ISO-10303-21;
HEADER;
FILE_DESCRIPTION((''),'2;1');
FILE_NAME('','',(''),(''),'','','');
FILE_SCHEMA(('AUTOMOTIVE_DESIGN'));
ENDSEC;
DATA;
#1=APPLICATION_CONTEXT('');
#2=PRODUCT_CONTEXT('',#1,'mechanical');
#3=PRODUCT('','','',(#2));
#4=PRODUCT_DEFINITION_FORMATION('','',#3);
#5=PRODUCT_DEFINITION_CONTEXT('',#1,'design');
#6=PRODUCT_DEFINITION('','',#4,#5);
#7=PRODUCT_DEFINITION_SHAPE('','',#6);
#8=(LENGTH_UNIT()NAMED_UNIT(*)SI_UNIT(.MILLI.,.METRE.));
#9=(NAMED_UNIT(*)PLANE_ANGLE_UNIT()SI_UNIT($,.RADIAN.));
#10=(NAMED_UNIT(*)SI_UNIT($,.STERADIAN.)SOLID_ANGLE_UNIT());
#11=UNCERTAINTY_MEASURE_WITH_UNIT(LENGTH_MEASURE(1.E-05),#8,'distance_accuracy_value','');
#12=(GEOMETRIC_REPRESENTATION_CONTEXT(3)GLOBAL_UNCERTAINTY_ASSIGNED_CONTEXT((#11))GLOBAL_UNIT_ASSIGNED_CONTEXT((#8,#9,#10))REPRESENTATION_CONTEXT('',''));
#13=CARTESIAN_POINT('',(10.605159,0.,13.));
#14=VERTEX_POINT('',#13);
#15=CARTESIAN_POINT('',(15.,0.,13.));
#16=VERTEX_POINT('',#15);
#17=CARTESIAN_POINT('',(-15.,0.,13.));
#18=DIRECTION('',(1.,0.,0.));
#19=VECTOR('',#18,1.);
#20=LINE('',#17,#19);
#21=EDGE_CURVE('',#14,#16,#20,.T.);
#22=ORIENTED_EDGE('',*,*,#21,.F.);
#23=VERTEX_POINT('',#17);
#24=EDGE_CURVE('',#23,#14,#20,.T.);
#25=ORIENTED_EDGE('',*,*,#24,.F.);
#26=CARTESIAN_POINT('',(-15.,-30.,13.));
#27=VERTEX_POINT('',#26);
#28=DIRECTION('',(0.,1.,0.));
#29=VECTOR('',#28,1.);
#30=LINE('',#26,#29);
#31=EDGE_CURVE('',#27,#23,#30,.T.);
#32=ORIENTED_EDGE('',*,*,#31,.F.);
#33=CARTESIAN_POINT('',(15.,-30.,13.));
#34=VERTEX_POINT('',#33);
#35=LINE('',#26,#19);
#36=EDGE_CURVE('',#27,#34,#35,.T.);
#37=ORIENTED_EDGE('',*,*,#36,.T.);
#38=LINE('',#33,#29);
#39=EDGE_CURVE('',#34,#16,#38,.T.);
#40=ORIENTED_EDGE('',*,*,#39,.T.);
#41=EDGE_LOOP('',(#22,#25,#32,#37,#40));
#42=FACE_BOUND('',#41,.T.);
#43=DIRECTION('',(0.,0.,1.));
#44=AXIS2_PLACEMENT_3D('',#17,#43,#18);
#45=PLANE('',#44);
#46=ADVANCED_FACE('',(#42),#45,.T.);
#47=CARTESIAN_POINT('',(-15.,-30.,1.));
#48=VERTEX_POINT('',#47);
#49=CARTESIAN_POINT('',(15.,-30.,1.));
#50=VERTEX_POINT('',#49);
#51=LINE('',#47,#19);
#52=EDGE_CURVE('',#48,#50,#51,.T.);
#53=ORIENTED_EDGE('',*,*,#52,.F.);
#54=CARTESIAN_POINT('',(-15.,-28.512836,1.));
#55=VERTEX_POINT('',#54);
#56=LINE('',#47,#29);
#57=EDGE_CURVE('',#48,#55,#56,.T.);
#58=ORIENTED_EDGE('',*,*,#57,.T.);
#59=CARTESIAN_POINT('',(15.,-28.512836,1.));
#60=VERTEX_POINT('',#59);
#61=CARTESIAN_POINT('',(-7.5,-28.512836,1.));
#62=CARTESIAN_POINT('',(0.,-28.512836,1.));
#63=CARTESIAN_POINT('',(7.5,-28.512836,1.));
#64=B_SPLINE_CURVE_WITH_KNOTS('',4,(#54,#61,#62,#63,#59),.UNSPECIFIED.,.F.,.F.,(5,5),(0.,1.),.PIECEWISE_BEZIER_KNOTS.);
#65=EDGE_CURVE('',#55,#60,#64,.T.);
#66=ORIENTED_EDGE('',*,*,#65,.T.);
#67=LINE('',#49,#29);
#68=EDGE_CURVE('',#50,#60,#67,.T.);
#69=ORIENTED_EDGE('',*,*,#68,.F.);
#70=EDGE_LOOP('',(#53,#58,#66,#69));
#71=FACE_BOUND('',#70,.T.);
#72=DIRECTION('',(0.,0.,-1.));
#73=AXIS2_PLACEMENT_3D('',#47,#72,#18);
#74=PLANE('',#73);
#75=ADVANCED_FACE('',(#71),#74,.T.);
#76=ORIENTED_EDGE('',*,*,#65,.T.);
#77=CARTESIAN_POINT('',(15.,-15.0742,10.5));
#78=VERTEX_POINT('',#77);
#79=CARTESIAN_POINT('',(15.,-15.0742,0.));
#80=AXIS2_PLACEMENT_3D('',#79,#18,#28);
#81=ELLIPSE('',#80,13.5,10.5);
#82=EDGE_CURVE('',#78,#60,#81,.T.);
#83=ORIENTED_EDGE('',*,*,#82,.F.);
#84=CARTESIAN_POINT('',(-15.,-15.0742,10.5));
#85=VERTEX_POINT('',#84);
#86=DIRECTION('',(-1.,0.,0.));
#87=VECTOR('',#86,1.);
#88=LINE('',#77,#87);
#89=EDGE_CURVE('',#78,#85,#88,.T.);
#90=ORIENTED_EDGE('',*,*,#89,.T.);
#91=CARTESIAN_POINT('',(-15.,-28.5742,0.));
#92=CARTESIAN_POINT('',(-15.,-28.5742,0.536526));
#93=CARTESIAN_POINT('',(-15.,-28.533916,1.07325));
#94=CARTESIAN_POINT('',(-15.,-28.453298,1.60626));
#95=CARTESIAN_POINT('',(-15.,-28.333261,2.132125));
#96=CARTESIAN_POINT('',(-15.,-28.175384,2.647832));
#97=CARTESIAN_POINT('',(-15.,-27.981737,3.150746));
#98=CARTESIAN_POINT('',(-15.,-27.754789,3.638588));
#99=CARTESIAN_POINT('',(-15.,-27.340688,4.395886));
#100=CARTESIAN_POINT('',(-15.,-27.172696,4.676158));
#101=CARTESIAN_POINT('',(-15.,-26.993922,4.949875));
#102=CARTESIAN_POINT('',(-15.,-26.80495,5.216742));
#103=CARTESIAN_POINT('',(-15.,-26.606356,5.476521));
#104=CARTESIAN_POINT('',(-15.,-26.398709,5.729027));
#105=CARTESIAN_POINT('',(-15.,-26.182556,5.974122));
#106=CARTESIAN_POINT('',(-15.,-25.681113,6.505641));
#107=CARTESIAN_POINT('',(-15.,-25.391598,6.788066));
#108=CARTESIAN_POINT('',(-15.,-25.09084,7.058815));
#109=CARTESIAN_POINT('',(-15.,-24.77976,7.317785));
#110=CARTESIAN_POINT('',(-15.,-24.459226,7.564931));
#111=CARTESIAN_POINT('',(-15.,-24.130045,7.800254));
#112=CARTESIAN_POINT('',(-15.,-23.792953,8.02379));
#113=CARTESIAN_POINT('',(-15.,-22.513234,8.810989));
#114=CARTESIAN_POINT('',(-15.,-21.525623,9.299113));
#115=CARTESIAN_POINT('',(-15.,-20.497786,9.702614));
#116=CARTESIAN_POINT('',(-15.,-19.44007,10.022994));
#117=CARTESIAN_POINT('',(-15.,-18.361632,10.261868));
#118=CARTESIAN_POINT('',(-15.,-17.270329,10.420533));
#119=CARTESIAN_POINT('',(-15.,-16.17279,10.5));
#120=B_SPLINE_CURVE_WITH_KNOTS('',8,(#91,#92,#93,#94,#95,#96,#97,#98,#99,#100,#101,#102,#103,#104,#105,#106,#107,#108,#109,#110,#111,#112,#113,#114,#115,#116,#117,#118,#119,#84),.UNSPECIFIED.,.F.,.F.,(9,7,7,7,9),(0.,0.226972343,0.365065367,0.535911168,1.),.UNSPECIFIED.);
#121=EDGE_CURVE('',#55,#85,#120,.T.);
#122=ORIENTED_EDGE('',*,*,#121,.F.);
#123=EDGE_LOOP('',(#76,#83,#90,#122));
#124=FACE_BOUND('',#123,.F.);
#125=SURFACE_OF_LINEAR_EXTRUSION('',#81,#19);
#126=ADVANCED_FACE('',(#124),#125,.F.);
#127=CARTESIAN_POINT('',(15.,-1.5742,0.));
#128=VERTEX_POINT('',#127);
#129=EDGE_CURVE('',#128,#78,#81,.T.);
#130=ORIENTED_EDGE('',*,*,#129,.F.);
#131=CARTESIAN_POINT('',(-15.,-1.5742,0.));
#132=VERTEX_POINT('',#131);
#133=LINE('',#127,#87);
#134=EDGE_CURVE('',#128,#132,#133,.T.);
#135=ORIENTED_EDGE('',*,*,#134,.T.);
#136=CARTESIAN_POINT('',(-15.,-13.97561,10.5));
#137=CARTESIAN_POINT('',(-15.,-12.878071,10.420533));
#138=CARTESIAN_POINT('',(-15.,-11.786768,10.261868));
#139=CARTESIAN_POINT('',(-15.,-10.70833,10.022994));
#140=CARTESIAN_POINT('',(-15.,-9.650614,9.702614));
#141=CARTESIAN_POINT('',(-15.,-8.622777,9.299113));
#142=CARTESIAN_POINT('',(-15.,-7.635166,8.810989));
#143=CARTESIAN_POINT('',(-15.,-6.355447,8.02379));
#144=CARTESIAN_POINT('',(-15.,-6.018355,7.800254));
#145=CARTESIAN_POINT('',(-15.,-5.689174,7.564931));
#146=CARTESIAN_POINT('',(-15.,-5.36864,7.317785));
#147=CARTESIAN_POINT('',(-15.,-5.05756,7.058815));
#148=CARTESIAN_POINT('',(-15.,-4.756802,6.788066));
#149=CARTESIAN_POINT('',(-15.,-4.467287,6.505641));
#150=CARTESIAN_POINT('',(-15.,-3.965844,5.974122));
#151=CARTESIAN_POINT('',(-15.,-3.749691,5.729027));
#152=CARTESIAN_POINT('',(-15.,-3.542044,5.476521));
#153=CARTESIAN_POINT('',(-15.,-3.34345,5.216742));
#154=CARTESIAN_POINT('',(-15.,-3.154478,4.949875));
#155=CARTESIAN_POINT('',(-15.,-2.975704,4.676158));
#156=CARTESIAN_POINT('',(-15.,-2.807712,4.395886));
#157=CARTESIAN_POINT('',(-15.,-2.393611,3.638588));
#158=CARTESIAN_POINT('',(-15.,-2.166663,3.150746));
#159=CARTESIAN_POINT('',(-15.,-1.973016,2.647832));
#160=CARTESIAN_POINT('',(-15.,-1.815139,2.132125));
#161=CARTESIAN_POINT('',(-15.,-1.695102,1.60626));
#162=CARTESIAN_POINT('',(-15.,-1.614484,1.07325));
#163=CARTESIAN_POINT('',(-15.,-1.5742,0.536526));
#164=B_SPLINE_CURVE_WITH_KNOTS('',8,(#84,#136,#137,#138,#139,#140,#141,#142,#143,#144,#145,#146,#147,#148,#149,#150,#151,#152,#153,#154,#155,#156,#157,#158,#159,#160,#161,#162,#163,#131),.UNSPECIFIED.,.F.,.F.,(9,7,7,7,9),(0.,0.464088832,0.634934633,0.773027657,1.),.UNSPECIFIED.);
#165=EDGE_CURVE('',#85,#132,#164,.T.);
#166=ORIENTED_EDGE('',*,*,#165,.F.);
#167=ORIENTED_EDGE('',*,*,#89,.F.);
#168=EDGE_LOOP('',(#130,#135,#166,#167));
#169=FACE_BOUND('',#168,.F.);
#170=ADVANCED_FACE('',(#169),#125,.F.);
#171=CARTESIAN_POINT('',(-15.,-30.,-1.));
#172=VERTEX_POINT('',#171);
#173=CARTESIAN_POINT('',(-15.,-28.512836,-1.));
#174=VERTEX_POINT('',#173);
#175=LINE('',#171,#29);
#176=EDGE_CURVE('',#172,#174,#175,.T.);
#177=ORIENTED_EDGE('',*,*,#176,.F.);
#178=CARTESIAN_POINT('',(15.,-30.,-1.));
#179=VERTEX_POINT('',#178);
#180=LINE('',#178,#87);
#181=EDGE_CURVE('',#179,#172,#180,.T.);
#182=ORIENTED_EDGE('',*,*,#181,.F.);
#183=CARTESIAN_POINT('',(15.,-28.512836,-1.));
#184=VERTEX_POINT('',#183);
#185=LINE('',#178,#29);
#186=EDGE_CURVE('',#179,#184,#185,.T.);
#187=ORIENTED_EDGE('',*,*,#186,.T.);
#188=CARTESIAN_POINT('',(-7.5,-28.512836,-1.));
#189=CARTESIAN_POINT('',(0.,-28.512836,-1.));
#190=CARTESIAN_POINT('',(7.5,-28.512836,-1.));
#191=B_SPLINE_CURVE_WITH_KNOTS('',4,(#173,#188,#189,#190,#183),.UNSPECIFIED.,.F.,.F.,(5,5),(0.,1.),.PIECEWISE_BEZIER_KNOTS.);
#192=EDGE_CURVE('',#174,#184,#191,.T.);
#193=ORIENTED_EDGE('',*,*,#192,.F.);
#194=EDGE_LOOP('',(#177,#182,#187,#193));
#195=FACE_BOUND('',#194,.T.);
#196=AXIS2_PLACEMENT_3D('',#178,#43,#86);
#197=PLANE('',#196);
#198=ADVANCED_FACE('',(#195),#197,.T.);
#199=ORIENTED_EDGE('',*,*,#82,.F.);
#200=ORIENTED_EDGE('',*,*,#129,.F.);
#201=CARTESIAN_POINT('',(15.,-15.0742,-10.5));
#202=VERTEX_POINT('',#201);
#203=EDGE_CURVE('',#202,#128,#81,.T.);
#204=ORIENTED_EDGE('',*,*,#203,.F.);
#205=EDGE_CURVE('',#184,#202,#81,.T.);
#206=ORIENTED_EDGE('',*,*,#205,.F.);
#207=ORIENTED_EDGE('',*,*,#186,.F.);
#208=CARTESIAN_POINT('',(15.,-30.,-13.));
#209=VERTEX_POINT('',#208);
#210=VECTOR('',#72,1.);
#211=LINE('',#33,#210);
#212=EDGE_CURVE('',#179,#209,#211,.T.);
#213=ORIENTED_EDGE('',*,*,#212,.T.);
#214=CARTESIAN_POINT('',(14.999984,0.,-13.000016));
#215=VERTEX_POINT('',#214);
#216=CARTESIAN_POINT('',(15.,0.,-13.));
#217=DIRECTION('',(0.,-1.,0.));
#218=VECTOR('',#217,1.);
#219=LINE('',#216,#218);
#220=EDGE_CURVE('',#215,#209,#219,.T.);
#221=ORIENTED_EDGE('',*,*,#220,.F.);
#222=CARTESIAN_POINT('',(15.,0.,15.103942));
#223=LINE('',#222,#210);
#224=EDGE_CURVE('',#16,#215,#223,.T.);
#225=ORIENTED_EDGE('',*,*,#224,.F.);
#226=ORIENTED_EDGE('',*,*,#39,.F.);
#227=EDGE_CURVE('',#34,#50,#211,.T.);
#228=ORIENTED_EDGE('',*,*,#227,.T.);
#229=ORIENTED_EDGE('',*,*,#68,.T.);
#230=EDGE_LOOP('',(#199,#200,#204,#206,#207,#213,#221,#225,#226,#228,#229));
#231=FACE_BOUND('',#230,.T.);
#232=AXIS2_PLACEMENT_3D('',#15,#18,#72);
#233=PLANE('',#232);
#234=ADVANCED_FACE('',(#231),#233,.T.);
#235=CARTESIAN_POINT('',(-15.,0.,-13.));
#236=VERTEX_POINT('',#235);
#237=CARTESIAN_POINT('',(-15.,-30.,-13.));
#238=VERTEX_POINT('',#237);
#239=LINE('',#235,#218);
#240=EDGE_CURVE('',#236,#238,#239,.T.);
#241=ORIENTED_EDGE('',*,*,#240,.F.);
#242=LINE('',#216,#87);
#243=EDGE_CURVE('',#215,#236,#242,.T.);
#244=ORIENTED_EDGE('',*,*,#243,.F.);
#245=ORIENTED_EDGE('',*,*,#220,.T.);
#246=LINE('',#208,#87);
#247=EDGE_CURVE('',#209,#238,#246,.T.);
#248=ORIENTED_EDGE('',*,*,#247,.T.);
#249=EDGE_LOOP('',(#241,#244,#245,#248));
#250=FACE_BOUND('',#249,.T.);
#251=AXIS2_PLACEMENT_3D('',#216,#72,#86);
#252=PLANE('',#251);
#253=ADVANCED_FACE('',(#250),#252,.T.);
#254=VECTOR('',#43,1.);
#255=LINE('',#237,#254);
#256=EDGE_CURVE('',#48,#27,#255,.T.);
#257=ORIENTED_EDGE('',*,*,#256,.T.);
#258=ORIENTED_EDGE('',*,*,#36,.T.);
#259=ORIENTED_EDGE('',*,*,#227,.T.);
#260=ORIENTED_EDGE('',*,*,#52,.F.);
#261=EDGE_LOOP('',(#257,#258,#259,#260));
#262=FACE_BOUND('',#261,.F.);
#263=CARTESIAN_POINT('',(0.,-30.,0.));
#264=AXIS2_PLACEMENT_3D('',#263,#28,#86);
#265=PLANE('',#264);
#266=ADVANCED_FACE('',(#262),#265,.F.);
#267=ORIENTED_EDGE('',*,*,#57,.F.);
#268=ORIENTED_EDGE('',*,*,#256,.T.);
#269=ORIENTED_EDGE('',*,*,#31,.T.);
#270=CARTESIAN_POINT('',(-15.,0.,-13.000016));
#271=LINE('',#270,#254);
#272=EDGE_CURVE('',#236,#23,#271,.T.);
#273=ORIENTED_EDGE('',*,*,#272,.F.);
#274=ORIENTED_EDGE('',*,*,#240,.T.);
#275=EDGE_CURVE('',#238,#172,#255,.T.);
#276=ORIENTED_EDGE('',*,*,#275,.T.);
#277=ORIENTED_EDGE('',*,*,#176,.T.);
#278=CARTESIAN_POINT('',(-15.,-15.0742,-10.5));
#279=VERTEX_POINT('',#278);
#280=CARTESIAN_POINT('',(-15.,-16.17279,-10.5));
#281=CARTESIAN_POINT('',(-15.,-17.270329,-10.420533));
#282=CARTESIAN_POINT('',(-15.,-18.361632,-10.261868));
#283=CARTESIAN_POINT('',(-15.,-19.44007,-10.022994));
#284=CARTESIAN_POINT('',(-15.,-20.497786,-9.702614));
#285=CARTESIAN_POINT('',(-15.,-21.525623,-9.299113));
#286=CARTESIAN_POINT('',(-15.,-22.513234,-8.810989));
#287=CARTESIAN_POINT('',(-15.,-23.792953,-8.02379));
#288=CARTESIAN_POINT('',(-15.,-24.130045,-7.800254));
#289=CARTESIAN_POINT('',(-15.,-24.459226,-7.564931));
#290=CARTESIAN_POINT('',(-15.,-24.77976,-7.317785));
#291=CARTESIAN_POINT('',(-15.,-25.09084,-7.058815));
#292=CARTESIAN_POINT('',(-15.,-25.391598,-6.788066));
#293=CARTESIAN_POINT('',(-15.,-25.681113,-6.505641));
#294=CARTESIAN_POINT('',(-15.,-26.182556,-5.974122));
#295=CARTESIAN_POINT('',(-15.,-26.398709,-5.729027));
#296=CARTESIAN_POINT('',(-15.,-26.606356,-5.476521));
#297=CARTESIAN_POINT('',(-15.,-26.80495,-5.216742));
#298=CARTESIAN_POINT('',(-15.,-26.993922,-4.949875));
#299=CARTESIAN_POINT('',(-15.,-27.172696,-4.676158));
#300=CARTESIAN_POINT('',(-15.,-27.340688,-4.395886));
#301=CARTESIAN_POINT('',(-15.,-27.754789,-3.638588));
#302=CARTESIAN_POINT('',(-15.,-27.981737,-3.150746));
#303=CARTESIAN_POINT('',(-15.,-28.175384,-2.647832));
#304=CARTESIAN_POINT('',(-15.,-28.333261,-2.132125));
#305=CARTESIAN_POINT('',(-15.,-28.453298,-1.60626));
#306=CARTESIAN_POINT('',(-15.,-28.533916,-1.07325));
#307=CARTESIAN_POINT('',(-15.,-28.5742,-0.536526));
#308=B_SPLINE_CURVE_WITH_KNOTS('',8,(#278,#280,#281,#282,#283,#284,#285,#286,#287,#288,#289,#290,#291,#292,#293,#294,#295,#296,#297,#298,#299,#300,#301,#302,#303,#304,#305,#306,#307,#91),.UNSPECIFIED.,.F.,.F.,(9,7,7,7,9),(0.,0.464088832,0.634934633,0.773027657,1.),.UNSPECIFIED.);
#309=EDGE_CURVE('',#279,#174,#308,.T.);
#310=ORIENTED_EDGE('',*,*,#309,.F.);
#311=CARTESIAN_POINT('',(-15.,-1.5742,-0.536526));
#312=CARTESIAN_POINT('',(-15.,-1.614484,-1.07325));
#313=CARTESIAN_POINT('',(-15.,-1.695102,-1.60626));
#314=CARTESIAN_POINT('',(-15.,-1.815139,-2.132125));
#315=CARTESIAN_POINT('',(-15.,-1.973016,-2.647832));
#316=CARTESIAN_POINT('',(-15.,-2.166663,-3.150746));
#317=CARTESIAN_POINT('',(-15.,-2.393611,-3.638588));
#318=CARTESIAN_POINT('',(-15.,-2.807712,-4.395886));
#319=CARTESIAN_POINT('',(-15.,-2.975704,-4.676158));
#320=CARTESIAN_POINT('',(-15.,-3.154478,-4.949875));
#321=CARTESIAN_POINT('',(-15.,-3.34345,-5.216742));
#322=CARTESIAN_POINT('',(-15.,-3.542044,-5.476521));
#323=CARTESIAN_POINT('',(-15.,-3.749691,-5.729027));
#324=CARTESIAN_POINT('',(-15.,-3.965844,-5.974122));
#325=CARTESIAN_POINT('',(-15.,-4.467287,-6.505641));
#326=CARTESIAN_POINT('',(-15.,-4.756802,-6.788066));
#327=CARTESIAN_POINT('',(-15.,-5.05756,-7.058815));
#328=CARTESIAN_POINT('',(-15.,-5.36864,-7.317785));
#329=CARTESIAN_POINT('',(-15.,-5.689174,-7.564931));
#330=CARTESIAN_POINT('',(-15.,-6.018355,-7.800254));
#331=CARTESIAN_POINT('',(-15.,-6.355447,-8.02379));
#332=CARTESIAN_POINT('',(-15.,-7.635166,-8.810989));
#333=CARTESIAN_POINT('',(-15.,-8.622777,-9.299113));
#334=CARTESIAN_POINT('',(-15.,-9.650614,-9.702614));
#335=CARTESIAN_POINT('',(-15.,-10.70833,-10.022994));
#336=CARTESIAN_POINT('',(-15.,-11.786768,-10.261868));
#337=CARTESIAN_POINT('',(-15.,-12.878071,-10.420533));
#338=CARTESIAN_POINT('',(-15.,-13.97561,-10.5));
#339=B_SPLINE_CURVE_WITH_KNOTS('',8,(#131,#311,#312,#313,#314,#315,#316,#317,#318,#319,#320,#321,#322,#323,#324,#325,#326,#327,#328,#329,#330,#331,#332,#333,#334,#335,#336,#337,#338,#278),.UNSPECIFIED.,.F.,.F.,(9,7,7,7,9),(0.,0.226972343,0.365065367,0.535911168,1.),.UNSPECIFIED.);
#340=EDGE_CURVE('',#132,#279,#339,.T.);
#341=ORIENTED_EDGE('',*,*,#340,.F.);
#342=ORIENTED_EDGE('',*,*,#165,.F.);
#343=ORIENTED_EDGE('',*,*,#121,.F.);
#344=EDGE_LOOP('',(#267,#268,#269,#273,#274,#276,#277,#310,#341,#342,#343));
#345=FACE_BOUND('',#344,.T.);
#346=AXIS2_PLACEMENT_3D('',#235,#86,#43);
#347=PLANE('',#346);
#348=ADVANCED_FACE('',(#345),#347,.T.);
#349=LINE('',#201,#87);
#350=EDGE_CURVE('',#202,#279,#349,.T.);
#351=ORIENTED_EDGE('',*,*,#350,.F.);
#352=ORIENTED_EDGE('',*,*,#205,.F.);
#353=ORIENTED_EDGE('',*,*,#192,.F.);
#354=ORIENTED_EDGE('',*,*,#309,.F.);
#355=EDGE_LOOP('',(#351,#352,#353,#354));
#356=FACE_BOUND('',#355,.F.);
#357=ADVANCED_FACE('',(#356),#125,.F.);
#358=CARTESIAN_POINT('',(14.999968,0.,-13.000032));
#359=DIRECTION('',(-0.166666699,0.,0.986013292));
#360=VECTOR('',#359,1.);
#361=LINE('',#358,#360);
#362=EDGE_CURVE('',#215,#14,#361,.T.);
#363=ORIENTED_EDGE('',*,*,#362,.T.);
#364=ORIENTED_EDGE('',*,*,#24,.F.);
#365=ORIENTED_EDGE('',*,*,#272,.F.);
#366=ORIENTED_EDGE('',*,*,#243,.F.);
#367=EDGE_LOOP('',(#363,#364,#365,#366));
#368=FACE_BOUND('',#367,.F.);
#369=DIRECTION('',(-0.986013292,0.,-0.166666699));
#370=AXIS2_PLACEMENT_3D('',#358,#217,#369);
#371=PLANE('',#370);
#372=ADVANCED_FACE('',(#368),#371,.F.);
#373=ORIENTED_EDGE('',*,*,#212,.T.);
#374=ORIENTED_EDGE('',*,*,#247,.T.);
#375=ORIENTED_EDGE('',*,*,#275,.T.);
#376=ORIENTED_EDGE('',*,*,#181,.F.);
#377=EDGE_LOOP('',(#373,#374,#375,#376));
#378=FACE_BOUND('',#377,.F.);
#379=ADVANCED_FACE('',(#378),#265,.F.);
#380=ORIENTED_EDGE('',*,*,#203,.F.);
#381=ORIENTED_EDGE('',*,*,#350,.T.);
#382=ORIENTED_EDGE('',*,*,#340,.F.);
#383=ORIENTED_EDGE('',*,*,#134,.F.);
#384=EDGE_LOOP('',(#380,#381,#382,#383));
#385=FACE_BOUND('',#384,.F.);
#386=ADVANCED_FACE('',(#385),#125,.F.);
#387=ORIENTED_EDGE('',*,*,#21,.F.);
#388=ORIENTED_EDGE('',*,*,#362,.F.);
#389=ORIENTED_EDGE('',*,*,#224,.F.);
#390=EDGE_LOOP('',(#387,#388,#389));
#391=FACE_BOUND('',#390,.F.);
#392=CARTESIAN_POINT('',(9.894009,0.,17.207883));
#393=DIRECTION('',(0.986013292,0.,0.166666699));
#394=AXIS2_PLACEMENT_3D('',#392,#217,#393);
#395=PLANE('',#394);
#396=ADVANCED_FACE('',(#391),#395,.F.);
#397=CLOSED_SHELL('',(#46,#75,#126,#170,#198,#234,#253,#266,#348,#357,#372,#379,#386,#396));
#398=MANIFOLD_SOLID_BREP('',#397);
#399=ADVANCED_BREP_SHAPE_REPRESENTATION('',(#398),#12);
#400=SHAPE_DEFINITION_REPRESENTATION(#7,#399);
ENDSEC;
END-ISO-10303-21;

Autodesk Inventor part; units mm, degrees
ref_plane "YZ Plane" through (0, 0, 0) normal (1, 0, 0) x (0, 1, 0)
ref_plane "XZ Plane" through (0, 0, 0) normal (0, 1, 0) x (-1, 0, 0)
ref_plane "XY Plane" through (0, 0, 0) normal (0, 0, 1) x (1, 0, 0)
sketch "BaseSC" plane through (0, 0, 0) normal (0, 1, 0) x (-1, 0, 0)
  line L0 (15, 13) -> (-15, 13)
  line L1 (-15, 13) -> (-15, -13)
  line L2 (-15, -13) -> (15, -13)
  line L3 (15, -13) -> (15, 13)
  line L4 (15, 13) -> (-15, -13) construction
  line L5 (-15, 13) -> (15, -13) construction
  line L6 (15, 13) -> (14.1667, 17.9301)
  line L7 (14.1667, 17.9301) -> (-15, 13)
  line L8 (0, 0) -> (8.3423, 0)
  line L9 (15, -13) -> (14.1667, -17.9301)
  line L10 (14.1667, -17.9301) -> (-15, -13)
  line L11 (-15, 13) -> (-14.1667, 17.9301)
  line L12 (-14.1667, 17.9301) -> (15, 13)
  dimension "d0" = 30
  dimension "d1" = 26
  dimension "d9" = 5
  dimension "d10" = 90
  dimension "d17" = 5
  dimension "d18" = 90
sketch "スケッチ2" plane through (0, 0, 0) normal (0, 0, 1) x (1, 0, 0)
  point P0 (0, 0)
extrude "押し出し1" add sketch "BaseSC" against normal blind 30 contours L3 L2 L1 L0
sketch "スケッチ3" plane through (15, 0, 13) normal (1, 0, 0) x (0, 0, -1)
  line L0 (2.5, -1.5742) -> (23.5, -1.5742)
  line L1 (23.5, -1.5742) -> (23.5, -28.5742)
  line L2 (23.5, -28.5742) -> (2.5, -28.5742)
  line L3 (2.5, -28.5742) -> (2.5, -1.5742)
  line L4 (2.5, -1.5742) -> (23.5, -28.5742) construction
  line L5 (23.5, -1.5742) -> (2.5, -28.5742) construction
  ellipse E0 centre (13, -15.0742) end of major axis (23.5, -15.0742) minor radius 13.5
  point P0 (13, 0)
  dimension "d5" = 21
  dimension "d6" = 27
extrude "押し出し2" cut sketch "スケッチ3" against normal through all contours E0
extrude "押し出し3" add sketch "BaseSC" along normal blind 36 contours L3 L2 L1 L0 | L9 L10 L2
extrude "押し出し5" add sketch "BaseSC" along normal blind 36 contours L0 L7 L12 | L11 L12 L7
sketch "スケッチ5" plane through (-14.1667, 0, -17.9301) normal (0.1666667, 0, -0.9860133) x (-0.9860133, 0, -0.1666667)
  circle A0 centre (-14.1422, 25) radius 5.3
  line L0 (-29.5804, 0) -> (0, 0) projected
  point P0 (-16.9569, 0)
  dimension "d21" = 10.6
  dimension "d22" = 25
extrude "押し出し6" cut sketch "スケッチ5" against normal through all
sketch "スケッチ6" plane through (0, -30, 0) normal (0, -1, 0) x (1, 0, 0)
  line L0 (15, -1) -> (-15, -1)
  line L1 (-15, -1) -> (-15, 1)
  line L2 (-15, 1) -> (15, 1)
  line L3 (15, 1) -> (15, -1)
  line L4 (15, -1) -> (-15, 1) construction
  line L5 (-15, -1) -> (15, 1) construction
  point P0 (0, 0)
  dimension "d25" = 30
  dimension "d26" = 2
extrude "押し出し7" cut sketch "スケッチ6" against normal blind 5
fillet "フィレット1" radius 10 2 edges at (15, 36, 0) (-15, 36, 0)
sketch "スケッチ7" plane through (-14.1667, 0, -17.9301) normal (0.1666667, 0, -0.9860133) x (-0.9860133, 0, -0.1666667)
  circle A0 centre (-14.1422, 25) radius 5.3 projected
  ellipse E0 centre (-9.2967, 26) end of major axis (0.8452, 26) minor radius 10 (0, 29.9965) -> (-9.2967, 36) ccw projected
  line L0 (-19.4385, 36) -> (-9.2967, 36) projected
  ellipse E1 centre (-19.4385, 26) end of major axis (-29.5804, 26) minor radius 10 (-19.4385, 36) -> (-29.5804, 26) ccw projected
  line L1 (-29.5804, 0) -> (-29.5804, 26) projected
  line L2 (-29.5804, 0) -> (0, 0) projected
  line L3 (0, 0) -> (0, 29.9965) projected
  point P0 (-16.9569, 0)
extrude "押し出し8" cut sketch "スケッチ7" against normal through all
sketch "スケッチ8" plane through (14.1667, 0, 17.9301) normal (-0.1666667, 0, 0.9860133) x (0.9860133, 0, 0.1666667)
  line L0 (-4.3333, 26) -> (-4.3333, 0) projected
  line L1 (-4.3333, 0) -> (0, 0) projected
  line L2 (0, 0) -> (0, 29.9965) projected
  ellipse E0 centre (-9.2967, 26) end of major axis (0.8452, 26) minor radius 10 (0, 29.9965) -> (-9.2967, 36) ccw projected
  line L3 (-14.4752, 36) -> (-9.2967, 36) projected
  ellipse E1 centre (-14.4752, 26) end of major axis (-4.3333, 26) minor radius 10 (-4.3333, 26) -> (-14.4752, 36) ccw projected
  point P0 (-16.9569, 0)
extrude "押し出し9" cut sketch "スケッチ8" against normal through all
properties part number "default"
